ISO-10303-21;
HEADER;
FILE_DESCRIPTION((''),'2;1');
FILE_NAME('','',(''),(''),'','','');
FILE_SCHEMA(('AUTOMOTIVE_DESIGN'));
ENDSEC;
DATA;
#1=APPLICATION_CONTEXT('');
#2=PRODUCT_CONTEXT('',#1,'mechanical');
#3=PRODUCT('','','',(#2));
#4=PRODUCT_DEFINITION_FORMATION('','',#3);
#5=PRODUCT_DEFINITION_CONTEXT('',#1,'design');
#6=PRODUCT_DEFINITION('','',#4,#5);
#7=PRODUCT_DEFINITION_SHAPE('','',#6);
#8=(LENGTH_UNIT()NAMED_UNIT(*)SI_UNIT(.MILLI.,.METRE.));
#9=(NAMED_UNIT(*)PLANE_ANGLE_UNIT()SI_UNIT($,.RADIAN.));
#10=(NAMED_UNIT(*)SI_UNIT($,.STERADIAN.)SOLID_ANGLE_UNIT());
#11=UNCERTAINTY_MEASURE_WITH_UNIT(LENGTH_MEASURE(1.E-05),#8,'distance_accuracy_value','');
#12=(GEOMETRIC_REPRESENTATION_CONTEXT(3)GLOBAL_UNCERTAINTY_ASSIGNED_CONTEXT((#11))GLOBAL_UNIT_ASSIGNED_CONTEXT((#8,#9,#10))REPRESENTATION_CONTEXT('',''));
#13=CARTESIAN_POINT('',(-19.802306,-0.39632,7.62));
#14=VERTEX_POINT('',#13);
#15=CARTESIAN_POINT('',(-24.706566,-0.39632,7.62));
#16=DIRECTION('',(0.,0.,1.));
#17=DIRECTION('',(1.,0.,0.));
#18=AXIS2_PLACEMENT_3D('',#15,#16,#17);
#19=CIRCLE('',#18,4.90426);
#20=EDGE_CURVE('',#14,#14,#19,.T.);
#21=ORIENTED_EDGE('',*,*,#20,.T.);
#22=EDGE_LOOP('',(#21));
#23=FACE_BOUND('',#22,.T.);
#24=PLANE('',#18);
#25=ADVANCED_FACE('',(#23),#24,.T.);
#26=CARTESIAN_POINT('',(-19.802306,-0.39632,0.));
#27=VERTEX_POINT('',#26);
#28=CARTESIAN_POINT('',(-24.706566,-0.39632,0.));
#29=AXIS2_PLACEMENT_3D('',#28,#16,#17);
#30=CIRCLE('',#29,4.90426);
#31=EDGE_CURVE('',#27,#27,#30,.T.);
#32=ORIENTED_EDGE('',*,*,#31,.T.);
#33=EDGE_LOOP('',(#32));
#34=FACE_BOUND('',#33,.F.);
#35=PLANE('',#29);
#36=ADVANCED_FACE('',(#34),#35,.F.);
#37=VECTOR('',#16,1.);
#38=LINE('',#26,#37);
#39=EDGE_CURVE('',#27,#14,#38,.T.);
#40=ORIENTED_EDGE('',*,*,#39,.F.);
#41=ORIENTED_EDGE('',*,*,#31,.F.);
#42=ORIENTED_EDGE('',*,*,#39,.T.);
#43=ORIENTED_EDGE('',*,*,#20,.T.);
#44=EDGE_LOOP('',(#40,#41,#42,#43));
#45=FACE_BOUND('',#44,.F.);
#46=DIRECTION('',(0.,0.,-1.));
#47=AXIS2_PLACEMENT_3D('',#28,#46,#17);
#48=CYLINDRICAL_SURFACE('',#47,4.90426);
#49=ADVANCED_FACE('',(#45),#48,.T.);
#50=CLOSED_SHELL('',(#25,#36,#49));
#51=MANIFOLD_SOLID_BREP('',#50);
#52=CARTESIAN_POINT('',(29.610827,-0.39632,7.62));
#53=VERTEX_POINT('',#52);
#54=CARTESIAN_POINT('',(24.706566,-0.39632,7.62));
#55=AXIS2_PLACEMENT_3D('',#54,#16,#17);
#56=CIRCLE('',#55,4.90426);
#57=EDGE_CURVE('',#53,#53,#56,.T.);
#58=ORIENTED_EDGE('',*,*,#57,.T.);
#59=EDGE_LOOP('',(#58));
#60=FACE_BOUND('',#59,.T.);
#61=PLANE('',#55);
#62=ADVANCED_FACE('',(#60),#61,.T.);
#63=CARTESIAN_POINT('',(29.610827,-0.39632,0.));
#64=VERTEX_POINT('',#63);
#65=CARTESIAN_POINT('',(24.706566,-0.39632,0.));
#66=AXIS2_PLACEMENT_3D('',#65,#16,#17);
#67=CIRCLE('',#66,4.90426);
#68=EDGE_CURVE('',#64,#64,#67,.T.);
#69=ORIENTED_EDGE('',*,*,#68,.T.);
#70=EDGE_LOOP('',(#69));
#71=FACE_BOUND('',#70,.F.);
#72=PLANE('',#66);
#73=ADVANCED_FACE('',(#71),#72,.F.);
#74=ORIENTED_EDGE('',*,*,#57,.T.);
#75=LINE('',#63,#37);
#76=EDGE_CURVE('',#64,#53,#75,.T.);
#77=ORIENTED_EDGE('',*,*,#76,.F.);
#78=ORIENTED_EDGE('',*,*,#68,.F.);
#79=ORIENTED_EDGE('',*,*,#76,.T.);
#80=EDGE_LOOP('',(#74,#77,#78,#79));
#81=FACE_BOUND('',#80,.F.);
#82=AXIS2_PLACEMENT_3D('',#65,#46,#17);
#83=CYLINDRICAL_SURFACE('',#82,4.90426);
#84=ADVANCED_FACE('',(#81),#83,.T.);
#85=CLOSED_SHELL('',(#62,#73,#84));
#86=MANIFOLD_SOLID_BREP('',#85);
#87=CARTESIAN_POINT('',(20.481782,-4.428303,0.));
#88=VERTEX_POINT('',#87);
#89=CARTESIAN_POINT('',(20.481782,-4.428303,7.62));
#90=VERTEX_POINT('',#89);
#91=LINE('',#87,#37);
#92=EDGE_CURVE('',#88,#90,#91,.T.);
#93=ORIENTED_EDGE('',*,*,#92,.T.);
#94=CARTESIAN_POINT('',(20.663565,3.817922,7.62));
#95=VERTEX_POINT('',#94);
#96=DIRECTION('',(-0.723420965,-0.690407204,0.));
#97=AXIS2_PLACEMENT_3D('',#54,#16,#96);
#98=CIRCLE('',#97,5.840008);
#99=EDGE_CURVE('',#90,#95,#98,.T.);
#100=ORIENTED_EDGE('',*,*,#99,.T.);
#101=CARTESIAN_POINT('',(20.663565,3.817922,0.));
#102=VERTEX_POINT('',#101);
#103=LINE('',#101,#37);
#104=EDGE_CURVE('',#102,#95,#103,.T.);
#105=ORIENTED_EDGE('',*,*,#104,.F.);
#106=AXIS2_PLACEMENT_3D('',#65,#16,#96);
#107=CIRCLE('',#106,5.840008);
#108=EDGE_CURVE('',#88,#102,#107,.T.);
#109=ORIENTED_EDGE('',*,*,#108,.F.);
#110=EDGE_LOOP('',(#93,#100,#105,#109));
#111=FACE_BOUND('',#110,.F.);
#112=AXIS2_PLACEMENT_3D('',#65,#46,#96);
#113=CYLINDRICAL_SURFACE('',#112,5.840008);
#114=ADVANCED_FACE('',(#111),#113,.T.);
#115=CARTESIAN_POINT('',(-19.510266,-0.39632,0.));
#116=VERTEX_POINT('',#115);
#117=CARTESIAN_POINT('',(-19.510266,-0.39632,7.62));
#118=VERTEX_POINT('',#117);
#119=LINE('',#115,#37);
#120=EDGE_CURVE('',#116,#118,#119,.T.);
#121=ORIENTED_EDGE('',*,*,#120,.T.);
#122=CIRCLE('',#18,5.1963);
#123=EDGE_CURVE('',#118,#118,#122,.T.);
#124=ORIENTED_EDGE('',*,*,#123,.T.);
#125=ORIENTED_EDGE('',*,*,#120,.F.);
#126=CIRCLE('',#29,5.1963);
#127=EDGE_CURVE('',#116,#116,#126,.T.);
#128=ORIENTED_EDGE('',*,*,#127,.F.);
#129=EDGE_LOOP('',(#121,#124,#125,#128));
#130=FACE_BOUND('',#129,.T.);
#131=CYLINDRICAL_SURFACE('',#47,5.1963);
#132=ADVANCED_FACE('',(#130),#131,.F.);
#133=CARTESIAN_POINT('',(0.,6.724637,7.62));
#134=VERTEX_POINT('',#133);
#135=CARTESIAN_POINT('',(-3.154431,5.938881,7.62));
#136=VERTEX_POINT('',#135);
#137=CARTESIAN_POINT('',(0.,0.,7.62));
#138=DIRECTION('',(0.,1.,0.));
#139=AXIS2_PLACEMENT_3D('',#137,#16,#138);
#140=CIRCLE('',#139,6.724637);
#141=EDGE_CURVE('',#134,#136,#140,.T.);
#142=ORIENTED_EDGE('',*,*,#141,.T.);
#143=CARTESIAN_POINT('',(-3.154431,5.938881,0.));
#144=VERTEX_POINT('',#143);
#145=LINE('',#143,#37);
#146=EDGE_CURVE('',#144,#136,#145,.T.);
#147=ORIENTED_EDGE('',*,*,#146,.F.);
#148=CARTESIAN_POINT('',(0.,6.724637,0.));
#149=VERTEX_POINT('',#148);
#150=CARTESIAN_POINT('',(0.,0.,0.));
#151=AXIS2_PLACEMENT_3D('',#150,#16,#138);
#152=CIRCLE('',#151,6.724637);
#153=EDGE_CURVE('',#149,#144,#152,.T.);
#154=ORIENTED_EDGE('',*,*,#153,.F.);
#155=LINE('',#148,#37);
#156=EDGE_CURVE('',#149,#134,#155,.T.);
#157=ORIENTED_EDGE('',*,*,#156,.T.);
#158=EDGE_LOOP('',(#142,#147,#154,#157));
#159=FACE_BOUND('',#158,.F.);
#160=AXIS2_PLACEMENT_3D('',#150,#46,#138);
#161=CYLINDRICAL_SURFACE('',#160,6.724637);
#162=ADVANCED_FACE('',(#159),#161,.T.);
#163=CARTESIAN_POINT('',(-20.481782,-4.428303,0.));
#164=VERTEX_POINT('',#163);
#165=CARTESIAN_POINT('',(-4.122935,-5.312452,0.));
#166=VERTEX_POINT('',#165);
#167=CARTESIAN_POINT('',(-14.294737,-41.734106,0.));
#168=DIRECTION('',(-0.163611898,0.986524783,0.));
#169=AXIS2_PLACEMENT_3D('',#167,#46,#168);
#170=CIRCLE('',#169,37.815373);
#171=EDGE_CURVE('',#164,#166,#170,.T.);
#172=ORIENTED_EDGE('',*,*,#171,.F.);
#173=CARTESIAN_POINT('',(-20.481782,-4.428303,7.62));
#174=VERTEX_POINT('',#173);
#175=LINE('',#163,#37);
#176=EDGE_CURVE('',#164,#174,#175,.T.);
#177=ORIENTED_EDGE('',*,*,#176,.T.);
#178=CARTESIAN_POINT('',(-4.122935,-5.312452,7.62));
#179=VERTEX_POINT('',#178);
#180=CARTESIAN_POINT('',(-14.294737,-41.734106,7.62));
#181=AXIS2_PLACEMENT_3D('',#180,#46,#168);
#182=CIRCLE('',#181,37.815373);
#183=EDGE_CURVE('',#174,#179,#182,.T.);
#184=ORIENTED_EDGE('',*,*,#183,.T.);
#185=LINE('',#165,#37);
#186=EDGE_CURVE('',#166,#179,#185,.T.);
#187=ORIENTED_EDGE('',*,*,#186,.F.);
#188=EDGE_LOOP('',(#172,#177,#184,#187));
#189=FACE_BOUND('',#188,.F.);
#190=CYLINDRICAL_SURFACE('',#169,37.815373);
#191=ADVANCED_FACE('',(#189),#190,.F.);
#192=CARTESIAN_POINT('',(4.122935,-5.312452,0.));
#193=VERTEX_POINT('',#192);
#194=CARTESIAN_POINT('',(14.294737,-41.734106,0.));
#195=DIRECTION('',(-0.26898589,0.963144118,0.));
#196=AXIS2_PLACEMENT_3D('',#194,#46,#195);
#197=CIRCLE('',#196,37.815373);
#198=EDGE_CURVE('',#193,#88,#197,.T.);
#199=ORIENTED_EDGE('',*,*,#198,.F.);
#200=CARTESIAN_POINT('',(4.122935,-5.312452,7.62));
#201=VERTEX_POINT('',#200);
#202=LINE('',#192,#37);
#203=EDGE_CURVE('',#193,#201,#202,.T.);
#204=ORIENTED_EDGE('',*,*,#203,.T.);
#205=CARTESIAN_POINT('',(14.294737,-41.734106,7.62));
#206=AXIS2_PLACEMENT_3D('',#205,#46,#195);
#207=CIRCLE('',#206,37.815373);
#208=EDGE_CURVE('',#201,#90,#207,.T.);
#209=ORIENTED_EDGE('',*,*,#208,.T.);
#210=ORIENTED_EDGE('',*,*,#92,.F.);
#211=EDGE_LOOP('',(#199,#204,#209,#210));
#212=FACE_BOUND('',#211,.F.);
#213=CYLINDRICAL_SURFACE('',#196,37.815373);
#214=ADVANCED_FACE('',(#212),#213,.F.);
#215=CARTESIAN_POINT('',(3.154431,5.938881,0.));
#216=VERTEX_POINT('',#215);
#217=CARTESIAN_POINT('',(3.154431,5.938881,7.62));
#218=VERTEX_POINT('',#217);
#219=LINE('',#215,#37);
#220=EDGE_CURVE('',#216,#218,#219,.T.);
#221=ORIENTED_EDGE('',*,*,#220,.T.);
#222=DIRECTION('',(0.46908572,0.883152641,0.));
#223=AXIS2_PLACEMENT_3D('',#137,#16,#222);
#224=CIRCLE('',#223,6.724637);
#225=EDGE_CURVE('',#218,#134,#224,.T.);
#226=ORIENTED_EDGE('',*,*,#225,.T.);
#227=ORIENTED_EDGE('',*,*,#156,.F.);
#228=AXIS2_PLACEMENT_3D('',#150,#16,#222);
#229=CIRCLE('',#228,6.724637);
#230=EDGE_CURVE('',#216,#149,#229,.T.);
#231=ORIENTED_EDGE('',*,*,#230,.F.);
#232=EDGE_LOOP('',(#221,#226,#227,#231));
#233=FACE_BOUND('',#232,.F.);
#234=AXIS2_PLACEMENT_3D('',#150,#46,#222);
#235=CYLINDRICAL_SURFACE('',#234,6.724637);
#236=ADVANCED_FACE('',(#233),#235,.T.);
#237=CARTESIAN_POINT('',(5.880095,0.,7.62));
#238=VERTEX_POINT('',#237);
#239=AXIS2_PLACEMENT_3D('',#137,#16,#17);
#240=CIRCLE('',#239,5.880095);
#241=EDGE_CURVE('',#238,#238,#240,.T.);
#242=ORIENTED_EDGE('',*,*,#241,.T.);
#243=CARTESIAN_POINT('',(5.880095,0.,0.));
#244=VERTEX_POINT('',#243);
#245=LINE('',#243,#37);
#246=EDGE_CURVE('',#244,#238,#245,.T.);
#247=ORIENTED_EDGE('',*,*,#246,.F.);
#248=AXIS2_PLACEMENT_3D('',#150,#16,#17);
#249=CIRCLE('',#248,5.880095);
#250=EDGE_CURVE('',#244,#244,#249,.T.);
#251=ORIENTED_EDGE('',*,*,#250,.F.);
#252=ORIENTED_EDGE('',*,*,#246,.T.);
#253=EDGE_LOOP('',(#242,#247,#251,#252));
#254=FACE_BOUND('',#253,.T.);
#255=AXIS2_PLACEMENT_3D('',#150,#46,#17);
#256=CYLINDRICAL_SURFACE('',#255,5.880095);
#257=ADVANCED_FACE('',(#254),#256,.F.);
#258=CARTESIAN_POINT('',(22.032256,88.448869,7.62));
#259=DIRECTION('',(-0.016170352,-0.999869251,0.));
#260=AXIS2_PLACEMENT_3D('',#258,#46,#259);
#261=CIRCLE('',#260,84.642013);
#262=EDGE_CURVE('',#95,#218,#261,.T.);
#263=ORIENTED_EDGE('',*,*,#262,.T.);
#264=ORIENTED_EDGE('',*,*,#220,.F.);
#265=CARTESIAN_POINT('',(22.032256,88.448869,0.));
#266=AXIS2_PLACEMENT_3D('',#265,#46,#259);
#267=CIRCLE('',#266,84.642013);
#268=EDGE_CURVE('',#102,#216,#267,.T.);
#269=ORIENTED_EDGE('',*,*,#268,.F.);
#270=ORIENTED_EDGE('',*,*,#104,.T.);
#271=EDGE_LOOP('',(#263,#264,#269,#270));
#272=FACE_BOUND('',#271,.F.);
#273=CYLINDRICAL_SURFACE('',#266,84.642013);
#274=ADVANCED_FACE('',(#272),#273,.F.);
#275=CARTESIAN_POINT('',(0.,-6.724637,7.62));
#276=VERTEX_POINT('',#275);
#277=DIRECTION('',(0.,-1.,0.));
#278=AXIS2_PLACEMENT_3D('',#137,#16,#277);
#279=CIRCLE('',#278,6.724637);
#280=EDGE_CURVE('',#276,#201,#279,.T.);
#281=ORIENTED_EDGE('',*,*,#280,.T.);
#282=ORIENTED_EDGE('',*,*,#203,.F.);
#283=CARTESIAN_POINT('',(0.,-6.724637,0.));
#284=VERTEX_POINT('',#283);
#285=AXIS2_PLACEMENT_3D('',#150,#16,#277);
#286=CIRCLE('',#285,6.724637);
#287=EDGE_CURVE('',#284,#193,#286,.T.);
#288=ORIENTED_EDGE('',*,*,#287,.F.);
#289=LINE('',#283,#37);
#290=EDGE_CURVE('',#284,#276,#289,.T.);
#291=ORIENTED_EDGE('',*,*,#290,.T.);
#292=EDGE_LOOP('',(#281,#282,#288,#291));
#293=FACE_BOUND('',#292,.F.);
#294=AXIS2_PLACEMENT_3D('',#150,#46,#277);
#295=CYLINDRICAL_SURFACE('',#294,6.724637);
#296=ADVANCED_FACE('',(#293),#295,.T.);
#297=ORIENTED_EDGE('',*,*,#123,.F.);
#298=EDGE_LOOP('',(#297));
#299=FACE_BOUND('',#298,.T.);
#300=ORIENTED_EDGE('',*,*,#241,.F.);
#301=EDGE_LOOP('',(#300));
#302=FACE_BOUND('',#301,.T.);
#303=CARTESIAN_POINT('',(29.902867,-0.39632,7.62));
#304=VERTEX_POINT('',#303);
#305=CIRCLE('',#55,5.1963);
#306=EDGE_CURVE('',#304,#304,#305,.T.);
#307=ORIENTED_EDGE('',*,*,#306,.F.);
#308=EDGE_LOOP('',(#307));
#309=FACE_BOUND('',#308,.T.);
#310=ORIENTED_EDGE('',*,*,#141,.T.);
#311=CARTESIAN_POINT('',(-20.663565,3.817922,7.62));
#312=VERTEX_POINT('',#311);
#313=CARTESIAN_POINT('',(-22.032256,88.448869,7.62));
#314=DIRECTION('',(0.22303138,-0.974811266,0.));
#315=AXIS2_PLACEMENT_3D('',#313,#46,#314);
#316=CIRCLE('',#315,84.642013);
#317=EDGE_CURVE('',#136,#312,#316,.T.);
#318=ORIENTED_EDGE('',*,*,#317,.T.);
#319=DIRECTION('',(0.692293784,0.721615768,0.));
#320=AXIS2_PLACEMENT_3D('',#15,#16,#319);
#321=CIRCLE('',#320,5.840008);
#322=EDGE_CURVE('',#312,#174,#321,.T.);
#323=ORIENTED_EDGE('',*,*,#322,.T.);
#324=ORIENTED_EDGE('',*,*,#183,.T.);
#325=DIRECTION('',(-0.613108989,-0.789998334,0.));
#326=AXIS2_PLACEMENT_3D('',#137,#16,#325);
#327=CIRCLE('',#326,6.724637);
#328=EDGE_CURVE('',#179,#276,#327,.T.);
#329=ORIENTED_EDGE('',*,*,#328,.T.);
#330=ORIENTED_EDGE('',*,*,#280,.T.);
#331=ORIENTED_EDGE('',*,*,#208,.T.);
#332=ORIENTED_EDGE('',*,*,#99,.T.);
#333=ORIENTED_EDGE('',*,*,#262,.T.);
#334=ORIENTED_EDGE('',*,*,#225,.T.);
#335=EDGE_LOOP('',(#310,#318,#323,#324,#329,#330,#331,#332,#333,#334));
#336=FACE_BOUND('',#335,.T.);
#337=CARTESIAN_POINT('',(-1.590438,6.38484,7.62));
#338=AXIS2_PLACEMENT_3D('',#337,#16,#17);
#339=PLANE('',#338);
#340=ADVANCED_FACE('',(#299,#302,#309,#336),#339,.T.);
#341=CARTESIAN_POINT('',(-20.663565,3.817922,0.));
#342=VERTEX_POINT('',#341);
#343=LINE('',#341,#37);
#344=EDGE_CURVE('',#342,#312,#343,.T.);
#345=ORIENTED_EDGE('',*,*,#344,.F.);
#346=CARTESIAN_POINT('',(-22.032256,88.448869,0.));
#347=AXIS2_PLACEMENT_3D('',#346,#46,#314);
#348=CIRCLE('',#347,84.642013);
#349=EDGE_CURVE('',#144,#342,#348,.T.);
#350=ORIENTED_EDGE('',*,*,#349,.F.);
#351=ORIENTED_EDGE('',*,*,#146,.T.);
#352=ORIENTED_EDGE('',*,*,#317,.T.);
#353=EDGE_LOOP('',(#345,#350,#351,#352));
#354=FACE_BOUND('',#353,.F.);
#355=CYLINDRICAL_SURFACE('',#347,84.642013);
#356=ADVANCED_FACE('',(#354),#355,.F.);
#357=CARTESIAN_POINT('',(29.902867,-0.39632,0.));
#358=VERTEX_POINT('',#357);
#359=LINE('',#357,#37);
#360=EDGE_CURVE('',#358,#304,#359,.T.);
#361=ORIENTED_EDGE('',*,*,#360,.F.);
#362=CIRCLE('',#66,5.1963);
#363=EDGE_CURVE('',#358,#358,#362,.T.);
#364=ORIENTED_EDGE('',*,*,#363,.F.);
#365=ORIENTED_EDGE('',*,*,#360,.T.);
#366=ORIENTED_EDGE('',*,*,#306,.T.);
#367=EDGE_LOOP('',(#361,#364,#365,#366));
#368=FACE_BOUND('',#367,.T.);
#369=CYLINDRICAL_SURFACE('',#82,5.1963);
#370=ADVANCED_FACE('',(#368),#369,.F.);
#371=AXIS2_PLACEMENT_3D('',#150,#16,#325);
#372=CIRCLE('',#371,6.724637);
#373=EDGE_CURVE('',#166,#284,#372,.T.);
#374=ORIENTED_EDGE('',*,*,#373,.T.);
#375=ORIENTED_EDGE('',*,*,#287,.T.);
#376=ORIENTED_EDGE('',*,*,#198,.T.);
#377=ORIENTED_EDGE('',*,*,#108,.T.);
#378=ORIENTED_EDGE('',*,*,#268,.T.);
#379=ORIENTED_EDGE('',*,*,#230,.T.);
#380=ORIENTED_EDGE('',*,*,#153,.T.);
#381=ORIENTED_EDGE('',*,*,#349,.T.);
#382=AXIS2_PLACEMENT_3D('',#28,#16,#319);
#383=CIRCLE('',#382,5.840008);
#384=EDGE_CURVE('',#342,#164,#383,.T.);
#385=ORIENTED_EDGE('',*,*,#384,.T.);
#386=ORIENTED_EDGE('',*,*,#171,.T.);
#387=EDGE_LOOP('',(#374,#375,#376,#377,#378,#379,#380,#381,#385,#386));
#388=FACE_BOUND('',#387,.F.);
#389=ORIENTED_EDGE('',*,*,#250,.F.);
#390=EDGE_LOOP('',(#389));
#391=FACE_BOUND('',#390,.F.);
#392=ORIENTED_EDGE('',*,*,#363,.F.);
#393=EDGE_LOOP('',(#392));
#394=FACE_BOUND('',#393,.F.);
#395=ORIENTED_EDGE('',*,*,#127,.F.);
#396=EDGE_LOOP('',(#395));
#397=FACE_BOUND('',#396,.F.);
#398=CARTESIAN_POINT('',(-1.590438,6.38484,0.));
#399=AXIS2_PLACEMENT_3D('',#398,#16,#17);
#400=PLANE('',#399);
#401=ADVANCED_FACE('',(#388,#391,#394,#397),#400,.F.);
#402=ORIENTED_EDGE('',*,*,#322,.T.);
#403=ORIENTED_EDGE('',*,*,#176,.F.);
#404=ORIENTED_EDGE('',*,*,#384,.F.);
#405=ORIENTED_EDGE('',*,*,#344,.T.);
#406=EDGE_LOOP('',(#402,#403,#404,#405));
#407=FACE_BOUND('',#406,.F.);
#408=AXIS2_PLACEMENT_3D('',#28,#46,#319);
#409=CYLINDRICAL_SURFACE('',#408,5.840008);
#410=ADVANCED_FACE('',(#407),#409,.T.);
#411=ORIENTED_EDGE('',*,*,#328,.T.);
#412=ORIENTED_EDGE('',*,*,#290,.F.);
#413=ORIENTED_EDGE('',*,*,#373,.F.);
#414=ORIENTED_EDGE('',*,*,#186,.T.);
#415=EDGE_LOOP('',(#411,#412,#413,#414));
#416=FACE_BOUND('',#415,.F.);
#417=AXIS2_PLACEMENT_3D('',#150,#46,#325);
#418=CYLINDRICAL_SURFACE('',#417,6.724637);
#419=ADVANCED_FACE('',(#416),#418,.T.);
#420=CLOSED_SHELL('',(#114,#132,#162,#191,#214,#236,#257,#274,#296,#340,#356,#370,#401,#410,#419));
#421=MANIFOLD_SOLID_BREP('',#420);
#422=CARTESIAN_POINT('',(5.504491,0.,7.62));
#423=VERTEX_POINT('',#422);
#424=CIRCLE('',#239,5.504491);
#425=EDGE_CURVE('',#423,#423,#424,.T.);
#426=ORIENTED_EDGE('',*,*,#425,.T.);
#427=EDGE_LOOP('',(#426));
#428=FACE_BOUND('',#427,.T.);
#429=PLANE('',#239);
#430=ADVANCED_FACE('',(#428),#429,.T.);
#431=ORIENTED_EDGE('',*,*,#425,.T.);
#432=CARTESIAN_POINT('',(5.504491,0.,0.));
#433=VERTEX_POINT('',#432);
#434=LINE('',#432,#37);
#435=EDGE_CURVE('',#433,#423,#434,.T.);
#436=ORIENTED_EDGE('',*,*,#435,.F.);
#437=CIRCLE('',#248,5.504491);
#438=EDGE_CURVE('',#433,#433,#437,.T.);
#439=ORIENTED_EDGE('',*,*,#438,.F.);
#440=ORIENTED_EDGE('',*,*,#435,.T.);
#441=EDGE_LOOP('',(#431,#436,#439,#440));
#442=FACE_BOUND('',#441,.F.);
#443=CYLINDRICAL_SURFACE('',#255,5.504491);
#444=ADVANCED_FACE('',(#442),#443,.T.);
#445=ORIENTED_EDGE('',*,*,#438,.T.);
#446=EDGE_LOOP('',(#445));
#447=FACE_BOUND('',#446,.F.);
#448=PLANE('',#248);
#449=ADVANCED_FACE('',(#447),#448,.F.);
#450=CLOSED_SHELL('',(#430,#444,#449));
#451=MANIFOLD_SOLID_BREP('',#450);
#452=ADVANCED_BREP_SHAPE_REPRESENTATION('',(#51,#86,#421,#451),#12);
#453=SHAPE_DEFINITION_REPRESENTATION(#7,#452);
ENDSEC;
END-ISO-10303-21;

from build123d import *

# Parameters (mm, degrees)
F0_R     = 5.1963002221
F0_R_2   = 5.8800950513
F1_DEPTH = 7.62
F0_R_3   = 5.5044911899
F0_R_4   = 4.9042601262


# Not quite as in the source:
# - a feature names something its author has since deleted; it is built from what else it names


with BuildPart() as f1:
    # F0 (on Top) → F1 (new body)
    with BuildSketch(Plane.XY):
        with BuildLine():
            ThreePointArc((-3.1544311234, 5.9388807954), (-1.573442924, 6.3166135062), (0, 6.7246368537))
            ThreePointArc((0, 6.7246368537), (-1.6254113553, 6.5252416614), (-3.1544311234, 5.9388807954))
        make_face()
        with BuildLine():
            ThreePointArc((0, 6.7246368537), (1.573442924, 6.3166135062), (3.1544311234, 5.9388807954))
            ThreePointArc((3.1544311234, 5.9388807954), (1.6254113553, 6.5252416614), (0, 6.7246368537))
        make_face()
        with BuildLine():
            ThreePointArc((0, -6.7246368537), (2.1790400303, -6.3618020529), (4.1229353018, -5.3124519114))
            ThreePointArc((4.1229353018, -5.3124519114), (2.0411071075, -5.9591008914), (0, -6.7246368537))
        make_face()
        with BuildLine():
            ThreePointArc((-4.1229353018, -5.3124519114), (-2.1790400303, -6.3618020529), (0, -6.7246368537))
            ThreePointArc((0, -6.7246368537), (-2.0411071075, -5.9591008914), (-4.1229353018, -5.3124519114))
        make_face()
        with BuildLine():
            ThreePointArc((-4.1229353018, -5.3124519114), (-6.6998610017, 0.5767177582), (-3.1544311234, 5.9388807954))
            ThreePointArc((-3.1544311234, 5.9388807954), (-11.8536034806, 4.4211029843), (-20.6635650247, 3.8179224357))
            ThreePointArc((-20.6635650247, 3.8179224357), (-30.545156174, -0.5250277146), (-20.481782034, -4.4283033349))
            ThreePointArc((-20.481782034, -4.4283033349), (-12.2539035705, -3.9738433369), (-4.1229353018, -5.3124519114))
        make_face()
        with Locations((-24.706566421, -0.3963195836)):
            Circle(F0_R, mode=Mode.SUBTRACT)
        with BuildLine():
            ThreePointArc((3.1544311234, 5.9388807954), (5.7633820192, 3.4647032362), (6.7246368537, 0))
            ThreePointArc((6.7246368537, 0), (6.0392873541, -2.9576593903), (4.1229353018, -5.3124519114))
            ThreePointArc((4.1229353018, -5.3124519114), (12.2539035705, -3.9738433369), (20.481782034, -4.4283033349))
            ThreePointArc((20.481782034, -4.4283033349), (30.545156174, -0.5250277146), (20.6635650247, 3.8179224357))
            ThreePointArc((20.6635650247, 3.8179224357), (11.8536034806, 4.4211029843), (3.1544311234, 5.9388807954))
        make_face()
        with Locations((24.706566421, -0.3963195836)):
            Circle(F0_R, mode=Mode.SUBTRACT)
        with BuildLine():
            ThreePointArc((4.1229353018, -5.3124519114), (6.0392873541, -2.9576593903), (6.7246368537, 0))
            ThreePointArc((6.7246368537, 0), (5.7633820192, 3.4647032362), (3.1544311234, 5.9388807954))
            ThreePointArc((3.1544311234, 5.9388807954), (1.573442924, 6.3166135062), (0, 6.7246368537))
            ThreePointArc((0, 6.7246368537), (-1.573442924, 6.3166135062), (-3.1544311234, 5.9388807954))
            ThreePointArc((-3.1544311234, 5.9388807954), (-6.6998610017, 0.5767177582), (-4.1229353018, -5.3124519114))
            ThreePointArc((-4.1229353018, -5.3124519114), (-2.0411071075, -5.9591008914), (0, -6.7246368537))
            ThreePointArc((0, -6.7246368537), (2.0411071075, -5.9591008914), (4.1229353018, -5.3124519114))
        make_face()
        Circle(F0_R_2, mode=Mode.SUBTRACT)
    extrude(amount=F1_DEPTH)


with BuildPart() as f1b:
    # F0 (on Top) → F1, piece 2 (new body)
    with BuildSketch(Plane.XY):
        Circle(F0_R_3)
    extrude(amount=F1_DEPTH)


with BuildPart() as f1c:
    # F0 (on Top) → F1, piece 3 (new body)
    with BuildSketch(Plane.XY):
        with Locations((24.706566421, -0.3963195836)):
            Circle(F0_R_4)
    extrude(amount=F1_DEPTH)


with BuildPart() as f1d:
    # F0 (on Top) → F1, piece 4 (new body)
    with BuildSketch(Plane.XY):
        with Locations((-24.706566421, -0.3963195836)):
            Circle(F0_R_4)
    extrude(amount=F1_DEPTH)


solid = Compound([f1.part, f1b.part, f1c.part, f1d.part])
